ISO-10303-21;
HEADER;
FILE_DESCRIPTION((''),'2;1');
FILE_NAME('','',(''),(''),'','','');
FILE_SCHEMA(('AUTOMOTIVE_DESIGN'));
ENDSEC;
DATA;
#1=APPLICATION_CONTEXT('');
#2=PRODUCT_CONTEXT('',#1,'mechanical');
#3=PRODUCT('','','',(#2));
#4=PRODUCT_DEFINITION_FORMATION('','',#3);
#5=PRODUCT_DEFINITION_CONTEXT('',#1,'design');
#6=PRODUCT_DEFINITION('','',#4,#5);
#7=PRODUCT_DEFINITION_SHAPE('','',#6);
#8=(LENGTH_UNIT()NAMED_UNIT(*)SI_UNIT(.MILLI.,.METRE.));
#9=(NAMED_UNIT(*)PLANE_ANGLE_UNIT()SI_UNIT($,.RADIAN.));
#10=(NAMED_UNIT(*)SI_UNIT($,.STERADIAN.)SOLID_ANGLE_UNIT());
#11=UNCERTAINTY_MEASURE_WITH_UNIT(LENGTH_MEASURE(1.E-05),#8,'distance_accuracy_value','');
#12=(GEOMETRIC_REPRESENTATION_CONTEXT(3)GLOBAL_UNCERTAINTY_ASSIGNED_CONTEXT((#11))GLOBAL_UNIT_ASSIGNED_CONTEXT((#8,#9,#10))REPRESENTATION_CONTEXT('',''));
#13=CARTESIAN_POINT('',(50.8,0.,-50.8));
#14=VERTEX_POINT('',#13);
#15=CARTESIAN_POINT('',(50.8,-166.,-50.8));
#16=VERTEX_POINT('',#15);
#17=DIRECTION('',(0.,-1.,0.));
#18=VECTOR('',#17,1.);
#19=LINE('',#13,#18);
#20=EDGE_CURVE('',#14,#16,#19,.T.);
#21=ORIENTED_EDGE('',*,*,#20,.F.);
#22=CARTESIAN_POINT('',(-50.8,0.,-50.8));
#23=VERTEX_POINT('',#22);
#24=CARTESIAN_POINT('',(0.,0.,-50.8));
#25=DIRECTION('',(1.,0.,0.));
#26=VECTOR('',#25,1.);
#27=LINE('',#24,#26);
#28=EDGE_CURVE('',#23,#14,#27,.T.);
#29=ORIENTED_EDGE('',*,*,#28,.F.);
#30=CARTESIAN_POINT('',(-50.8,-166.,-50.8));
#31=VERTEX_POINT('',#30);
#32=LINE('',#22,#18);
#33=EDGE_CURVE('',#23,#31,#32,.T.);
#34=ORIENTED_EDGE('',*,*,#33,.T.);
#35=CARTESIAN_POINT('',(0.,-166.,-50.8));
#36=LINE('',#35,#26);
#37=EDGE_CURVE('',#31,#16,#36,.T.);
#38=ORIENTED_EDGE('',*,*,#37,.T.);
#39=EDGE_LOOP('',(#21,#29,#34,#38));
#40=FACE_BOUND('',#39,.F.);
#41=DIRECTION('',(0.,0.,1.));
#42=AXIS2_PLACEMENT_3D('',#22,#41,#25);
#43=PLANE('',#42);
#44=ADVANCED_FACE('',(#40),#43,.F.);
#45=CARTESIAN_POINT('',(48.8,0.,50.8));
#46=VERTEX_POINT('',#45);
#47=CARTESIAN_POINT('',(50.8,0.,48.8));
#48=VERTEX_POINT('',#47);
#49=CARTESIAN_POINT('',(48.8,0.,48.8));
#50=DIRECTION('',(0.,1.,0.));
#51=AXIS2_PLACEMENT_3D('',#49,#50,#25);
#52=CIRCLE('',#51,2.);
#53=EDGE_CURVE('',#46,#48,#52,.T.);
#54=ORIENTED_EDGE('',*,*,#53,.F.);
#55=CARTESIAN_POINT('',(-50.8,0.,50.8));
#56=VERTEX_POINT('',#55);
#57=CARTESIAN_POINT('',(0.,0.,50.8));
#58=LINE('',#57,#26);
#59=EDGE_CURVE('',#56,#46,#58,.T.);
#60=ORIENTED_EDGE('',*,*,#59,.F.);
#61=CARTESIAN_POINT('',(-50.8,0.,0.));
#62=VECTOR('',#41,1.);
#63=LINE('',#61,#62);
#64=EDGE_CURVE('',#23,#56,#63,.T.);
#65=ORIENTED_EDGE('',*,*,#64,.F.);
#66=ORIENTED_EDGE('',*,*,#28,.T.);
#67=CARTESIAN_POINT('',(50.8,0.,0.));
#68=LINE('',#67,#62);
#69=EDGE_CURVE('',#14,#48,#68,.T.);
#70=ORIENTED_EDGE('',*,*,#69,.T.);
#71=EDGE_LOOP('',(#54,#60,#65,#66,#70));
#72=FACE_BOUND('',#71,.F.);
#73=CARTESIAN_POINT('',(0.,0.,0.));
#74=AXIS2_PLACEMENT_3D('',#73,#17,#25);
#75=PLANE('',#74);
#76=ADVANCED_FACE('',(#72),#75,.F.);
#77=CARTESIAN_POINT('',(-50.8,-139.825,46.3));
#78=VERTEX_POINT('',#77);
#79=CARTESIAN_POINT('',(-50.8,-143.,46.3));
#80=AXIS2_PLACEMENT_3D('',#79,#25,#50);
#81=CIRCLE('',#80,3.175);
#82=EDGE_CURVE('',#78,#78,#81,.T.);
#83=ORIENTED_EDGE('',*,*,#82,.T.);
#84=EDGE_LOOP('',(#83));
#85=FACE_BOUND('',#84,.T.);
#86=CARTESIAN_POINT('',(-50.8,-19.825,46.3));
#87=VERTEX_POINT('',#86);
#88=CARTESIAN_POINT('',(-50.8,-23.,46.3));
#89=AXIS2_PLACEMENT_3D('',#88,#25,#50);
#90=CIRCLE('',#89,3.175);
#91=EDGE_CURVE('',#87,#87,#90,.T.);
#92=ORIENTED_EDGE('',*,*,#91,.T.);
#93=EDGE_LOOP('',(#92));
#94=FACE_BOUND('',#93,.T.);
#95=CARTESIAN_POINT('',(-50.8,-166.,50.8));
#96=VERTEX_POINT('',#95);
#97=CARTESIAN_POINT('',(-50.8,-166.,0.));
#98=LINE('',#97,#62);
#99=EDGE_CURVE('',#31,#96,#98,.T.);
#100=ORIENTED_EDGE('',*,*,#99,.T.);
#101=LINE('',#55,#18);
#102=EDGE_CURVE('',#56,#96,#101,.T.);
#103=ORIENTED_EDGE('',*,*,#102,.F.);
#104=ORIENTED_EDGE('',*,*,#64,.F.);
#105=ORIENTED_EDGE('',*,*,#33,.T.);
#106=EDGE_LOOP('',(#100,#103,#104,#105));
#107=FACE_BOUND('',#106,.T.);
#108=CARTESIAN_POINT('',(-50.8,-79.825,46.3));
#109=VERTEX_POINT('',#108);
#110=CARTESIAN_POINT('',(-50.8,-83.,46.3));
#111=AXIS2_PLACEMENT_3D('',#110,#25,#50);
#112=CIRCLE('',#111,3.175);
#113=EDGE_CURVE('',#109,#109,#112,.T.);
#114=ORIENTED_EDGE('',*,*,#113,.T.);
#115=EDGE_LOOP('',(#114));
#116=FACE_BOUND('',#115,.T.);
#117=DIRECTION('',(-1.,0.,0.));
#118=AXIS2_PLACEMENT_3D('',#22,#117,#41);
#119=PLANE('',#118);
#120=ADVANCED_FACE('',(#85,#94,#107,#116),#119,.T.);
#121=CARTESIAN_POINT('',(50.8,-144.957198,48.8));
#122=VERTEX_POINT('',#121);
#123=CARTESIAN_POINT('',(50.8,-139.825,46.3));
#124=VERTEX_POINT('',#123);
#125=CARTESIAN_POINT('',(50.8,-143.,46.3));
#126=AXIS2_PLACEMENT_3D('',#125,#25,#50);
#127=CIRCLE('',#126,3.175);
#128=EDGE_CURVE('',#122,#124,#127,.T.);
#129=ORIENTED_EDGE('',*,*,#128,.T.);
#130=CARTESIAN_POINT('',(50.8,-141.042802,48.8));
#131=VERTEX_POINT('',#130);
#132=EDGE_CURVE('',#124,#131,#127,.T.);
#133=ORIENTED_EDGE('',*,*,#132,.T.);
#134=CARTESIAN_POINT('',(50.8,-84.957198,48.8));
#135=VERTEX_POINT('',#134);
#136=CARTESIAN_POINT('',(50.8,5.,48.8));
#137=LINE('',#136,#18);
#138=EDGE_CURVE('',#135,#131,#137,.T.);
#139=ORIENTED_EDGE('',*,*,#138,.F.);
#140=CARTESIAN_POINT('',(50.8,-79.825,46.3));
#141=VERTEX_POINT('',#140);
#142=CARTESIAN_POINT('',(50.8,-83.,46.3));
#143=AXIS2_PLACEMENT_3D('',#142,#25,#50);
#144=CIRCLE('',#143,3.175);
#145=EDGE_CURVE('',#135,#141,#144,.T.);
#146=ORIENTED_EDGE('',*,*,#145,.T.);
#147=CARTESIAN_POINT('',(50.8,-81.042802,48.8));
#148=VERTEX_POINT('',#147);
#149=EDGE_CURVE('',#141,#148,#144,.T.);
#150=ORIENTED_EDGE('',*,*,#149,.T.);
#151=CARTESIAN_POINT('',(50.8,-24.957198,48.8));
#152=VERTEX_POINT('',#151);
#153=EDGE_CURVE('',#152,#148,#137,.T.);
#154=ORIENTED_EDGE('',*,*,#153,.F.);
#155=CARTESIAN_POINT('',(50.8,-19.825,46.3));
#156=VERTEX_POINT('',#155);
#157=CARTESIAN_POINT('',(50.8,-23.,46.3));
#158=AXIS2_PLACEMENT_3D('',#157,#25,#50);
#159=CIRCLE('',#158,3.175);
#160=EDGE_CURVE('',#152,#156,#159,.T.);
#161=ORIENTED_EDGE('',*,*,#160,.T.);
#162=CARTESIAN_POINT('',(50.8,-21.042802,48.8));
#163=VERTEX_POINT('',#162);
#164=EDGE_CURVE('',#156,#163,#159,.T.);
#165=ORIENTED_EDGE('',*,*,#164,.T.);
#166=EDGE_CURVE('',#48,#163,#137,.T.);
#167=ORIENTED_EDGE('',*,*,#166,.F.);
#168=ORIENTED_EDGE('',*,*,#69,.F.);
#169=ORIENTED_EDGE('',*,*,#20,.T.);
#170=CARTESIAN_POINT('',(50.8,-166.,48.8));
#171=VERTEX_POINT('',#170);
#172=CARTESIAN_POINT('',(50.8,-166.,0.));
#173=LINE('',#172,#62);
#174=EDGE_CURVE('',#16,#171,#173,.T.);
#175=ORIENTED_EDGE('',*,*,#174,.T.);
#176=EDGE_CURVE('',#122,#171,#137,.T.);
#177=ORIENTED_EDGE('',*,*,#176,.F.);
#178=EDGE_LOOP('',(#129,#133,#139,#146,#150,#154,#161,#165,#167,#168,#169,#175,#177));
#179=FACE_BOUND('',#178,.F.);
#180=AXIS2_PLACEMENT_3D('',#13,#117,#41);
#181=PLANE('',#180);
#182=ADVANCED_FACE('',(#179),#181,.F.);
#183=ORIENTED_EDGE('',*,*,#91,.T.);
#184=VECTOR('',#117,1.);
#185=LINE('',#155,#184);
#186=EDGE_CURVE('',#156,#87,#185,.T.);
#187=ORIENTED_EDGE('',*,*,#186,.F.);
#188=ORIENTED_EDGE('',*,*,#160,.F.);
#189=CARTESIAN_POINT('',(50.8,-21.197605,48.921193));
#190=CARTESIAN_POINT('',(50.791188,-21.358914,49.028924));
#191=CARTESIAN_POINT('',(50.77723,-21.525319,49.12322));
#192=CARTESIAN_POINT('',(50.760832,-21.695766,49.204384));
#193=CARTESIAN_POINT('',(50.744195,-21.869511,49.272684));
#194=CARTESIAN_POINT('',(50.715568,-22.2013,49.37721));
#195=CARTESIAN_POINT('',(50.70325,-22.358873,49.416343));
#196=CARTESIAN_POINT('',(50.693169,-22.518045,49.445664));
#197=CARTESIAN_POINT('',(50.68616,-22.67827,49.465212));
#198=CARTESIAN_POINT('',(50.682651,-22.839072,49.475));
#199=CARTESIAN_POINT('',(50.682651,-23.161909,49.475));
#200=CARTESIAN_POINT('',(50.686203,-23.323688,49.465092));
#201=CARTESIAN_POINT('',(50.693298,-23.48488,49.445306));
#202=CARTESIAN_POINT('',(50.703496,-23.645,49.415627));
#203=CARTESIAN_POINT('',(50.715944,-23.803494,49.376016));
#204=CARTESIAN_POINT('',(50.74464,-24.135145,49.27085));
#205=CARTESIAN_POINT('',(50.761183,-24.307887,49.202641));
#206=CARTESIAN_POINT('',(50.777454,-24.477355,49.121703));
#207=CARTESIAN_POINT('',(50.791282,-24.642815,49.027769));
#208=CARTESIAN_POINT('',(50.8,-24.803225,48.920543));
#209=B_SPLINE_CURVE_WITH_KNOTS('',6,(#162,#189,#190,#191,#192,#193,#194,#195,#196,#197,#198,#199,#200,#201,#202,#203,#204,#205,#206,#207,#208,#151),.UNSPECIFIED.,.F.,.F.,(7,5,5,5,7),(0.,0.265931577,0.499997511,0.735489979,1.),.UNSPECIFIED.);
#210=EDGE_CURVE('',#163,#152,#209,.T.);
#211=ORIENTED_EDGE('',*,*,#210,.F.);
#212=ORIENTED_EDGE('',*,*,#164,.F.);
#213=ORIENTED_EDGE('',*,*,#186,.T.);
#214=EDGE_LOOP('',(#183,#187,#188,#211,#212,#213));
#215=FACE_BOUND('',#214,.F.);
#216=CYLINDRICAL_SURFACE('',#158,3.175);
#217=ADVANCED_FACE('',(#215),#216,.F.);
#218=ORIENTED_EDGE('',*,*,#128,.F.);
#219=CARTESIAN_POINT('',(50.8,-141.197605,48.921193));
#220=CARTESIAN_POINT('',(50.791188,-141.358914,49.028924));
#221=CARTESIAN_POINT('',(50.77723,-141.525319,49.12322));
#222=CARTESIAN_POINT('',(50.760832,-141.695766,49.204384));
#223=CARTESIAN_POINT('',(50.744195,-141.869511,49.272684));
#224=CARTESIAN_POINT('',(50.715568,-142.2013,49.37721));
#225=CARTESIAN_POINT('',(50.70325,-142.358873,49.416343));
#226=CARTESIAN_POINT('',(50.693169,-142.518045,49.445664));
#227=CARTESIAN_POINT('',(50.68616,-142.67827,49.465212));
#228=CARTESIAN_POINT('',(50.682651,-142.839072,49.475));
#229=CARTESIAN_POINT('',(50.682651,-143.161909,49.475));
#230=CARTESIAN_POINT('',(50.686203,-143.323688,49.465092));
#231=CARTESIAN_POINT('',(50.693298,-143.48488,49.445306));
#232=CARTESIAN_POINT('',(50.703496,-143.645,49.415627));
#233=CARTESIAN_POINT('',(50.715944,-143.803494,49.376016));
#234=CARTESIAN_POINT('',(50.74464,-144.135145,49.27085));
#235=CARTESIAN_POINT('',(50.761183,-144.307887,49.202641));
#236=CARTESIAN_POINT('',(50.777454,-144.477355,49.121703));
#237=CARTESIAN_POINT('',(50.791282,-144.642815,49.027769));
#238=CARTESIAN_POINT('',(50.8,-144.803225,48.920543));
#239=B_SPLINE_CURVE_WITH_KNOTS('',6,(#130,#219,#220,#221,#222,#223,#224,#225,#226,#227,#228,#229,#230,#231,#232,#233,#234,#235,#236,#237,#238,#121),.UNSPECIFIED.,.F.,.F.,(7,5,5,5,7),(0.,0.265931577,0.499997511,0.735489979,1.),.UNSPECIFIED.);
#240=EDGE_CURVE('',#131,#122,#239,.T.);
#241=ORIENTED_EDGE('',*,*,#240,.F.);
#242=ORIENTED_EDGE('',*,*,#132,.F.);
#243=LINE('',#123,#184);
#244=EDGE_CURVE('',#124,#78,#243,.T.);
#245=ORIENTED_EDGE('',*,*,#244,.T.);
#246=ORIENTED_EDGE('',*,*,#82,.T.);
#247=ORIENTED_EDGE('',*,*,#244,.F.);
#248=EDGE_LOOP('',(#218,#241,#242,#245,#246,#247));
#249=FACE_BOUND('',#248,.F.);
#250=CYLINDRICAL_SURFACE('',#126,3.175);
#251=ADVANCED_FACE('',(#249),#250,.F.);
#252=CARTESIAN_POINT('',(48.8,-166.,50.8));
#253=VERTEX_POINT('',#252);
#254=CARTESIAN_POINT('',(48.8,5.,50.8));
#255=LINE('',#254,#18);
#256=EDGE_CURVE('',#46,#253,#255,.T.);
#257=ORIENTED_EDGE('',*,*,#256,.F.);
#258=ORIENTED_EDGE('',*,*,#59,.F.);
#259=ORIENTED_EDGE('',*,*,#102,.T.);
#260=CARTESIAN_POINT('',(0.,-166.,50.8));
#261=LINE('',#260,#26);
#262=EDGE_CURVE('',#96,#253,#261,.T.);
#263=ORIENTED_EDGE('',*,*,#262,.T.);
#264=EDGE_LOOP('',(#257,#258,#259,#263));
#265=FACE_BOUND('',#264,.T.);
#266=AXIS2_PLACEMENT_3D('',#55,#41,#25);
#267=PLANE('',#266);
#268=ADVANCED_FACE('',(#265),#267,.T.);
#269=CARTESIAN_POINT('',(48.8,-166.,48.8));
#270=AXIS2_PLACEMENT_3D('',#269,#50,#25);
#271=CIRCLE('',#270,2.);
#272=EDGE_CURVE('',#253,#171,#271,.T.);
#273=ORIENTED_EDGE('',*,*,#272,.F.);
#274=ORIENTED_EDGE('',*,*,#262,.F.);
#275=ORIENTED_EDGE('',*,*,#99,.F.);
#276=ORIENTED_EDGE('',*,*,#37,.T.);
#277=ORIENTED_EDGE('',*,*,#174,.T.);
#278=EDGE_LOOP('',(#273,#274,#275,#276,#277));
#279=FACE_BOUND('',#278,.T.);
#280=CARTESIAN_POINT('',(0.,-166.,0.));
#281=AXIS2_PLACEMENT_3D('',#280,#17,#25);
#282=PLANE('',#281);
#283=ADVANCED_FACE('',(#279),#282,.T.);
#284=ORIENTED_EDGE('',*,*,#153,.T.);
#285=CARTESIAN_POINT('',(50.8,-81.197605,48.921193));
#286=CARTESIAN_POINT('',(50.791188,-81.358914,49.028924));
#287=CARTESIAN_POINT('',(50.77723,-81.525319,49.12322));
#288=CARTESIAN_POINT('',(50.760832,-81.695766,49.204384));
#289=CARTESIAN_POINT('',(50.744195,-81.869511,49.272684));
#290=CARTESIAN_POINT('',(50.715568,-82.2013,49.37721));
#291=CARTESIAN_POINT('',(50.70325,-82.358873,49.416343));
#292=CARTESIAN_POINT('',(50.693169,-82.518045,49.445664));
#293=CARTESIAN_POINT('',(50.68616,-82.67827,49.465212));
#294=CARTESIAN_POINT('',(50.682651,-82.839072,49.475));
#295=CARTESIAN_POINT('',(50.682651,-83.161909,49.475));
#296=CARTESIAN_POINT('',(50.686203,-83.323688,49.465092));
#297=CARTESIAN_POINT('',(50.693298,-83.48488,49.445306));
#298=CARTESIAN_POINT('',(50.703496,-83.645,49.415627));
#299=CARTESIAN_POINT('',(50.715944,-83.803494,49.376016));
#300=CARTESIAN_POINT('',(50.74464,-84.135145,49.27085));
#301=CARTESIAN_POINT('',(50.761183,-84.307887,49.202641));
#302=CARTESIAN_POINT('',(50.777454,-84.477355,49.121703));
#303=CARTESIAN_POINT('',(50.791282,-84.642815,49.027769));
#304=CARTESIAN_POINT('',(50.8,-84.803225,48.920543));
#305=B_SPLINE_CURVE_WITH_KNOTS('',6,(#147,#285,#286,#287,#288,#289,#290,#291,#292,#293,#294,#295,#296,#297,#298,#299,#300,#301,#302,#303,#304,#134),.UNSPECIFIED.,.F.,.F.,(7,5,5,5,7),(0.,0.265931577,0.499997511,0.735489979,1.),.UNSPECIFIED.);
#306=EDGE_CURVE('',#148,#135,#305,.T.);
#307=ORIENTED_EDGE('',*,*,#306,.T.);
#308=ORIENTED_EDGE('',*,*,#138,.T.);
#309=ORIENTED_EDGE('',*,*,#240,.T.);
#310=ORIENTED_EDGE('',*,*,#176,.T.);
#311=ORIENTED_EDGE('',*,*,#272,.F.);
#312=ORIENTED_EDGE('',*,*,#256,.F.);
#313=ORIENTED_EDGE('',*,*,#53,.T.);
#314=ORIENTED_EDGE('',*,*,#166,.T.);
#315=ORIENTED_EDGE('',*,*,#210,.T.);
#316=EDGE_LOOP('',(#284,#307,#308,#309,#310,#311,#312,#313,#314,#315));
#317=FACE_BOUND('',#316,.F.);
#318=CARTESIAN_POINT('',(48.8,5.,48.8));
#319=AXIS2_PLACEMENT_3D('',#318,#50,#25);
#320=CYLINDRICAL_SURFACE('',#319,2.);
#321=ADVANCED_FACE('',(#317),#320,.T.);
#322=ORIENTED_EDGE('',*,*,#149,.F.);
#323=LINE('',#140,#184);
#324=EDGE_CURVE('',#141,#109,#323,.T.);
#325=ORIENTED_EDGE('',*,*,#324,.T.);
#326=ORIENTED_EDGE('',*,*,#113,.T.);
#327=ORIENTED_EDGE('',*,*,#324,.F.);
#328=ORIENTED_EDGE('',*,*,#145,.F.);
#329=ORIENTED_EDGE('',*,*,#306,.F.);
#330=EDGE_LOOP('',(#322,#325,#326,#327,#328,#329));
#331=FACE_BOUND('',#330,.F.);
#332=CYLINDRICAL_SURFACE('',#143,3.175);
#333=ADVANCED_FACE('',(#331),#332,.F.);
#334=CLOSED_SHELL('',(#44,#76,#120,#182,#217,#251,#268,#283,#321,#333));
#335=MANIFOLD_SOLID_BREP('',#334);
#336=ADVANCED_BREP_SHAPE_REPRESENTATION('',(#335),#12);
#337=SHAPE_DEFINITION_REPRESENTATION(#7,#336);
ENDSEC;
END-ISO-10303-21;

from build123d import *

# Parameters (mm, degrees)
F0_W        = 101.6
F0_H        = 101.6
F1_DEPTH    = 166
F2_R        = 3.175
F3_DEPTH    = 101.601
F4_T1_DEPTH = 176


# Not quite as in the source:
# - a fillet or chamfer that OpenCascade refuses, or shapes differently, is made with other operations: its cross-section is extruded or revolved along the edge and cut away or added


with BuildPart() as f1:
    # F0 (on Front) → F1 (new body)
    with BuildSketch(Plane.XZ):
        Rectangle(F0_W, F0_H)
    extrude(amount=F1_DEPTH)

    # F2 (on face) → F3 (cut, through all)
    with BuildSketch(Plane.YZ.offset(50.8)):
        with Locations((-143, 46.3)):
            Circle(F2_R)
        with Locations((-83, 46.3)):
            Circle(F2_R)
        with Locations((-23, 46.3)):
            Circle(F2_R)
    extrude(amount=-F3_DEPTH, mode=Mode.SUBTRACT)

    # F4: fillet of radius 2 on 1 edges, made by hand

    # F4_s2 → F4_t1 (cut)
    with BuildSketch(Plane.XZ.offset(-5)):
        with BuildLine():
            ThreePointArc((50.8, 48.8), (50.2142135624, 50.2142135624), (48.8, 50.8))
            Line((48.8, 50.8), (50.8, 50.8))
            Line((50.8, 50.8), (50.8, 48.8))
        make_face()
    extrude(amount=F4_T1_DEPTH, mode=Mode.SUBTRACT)


solid = f1.part
